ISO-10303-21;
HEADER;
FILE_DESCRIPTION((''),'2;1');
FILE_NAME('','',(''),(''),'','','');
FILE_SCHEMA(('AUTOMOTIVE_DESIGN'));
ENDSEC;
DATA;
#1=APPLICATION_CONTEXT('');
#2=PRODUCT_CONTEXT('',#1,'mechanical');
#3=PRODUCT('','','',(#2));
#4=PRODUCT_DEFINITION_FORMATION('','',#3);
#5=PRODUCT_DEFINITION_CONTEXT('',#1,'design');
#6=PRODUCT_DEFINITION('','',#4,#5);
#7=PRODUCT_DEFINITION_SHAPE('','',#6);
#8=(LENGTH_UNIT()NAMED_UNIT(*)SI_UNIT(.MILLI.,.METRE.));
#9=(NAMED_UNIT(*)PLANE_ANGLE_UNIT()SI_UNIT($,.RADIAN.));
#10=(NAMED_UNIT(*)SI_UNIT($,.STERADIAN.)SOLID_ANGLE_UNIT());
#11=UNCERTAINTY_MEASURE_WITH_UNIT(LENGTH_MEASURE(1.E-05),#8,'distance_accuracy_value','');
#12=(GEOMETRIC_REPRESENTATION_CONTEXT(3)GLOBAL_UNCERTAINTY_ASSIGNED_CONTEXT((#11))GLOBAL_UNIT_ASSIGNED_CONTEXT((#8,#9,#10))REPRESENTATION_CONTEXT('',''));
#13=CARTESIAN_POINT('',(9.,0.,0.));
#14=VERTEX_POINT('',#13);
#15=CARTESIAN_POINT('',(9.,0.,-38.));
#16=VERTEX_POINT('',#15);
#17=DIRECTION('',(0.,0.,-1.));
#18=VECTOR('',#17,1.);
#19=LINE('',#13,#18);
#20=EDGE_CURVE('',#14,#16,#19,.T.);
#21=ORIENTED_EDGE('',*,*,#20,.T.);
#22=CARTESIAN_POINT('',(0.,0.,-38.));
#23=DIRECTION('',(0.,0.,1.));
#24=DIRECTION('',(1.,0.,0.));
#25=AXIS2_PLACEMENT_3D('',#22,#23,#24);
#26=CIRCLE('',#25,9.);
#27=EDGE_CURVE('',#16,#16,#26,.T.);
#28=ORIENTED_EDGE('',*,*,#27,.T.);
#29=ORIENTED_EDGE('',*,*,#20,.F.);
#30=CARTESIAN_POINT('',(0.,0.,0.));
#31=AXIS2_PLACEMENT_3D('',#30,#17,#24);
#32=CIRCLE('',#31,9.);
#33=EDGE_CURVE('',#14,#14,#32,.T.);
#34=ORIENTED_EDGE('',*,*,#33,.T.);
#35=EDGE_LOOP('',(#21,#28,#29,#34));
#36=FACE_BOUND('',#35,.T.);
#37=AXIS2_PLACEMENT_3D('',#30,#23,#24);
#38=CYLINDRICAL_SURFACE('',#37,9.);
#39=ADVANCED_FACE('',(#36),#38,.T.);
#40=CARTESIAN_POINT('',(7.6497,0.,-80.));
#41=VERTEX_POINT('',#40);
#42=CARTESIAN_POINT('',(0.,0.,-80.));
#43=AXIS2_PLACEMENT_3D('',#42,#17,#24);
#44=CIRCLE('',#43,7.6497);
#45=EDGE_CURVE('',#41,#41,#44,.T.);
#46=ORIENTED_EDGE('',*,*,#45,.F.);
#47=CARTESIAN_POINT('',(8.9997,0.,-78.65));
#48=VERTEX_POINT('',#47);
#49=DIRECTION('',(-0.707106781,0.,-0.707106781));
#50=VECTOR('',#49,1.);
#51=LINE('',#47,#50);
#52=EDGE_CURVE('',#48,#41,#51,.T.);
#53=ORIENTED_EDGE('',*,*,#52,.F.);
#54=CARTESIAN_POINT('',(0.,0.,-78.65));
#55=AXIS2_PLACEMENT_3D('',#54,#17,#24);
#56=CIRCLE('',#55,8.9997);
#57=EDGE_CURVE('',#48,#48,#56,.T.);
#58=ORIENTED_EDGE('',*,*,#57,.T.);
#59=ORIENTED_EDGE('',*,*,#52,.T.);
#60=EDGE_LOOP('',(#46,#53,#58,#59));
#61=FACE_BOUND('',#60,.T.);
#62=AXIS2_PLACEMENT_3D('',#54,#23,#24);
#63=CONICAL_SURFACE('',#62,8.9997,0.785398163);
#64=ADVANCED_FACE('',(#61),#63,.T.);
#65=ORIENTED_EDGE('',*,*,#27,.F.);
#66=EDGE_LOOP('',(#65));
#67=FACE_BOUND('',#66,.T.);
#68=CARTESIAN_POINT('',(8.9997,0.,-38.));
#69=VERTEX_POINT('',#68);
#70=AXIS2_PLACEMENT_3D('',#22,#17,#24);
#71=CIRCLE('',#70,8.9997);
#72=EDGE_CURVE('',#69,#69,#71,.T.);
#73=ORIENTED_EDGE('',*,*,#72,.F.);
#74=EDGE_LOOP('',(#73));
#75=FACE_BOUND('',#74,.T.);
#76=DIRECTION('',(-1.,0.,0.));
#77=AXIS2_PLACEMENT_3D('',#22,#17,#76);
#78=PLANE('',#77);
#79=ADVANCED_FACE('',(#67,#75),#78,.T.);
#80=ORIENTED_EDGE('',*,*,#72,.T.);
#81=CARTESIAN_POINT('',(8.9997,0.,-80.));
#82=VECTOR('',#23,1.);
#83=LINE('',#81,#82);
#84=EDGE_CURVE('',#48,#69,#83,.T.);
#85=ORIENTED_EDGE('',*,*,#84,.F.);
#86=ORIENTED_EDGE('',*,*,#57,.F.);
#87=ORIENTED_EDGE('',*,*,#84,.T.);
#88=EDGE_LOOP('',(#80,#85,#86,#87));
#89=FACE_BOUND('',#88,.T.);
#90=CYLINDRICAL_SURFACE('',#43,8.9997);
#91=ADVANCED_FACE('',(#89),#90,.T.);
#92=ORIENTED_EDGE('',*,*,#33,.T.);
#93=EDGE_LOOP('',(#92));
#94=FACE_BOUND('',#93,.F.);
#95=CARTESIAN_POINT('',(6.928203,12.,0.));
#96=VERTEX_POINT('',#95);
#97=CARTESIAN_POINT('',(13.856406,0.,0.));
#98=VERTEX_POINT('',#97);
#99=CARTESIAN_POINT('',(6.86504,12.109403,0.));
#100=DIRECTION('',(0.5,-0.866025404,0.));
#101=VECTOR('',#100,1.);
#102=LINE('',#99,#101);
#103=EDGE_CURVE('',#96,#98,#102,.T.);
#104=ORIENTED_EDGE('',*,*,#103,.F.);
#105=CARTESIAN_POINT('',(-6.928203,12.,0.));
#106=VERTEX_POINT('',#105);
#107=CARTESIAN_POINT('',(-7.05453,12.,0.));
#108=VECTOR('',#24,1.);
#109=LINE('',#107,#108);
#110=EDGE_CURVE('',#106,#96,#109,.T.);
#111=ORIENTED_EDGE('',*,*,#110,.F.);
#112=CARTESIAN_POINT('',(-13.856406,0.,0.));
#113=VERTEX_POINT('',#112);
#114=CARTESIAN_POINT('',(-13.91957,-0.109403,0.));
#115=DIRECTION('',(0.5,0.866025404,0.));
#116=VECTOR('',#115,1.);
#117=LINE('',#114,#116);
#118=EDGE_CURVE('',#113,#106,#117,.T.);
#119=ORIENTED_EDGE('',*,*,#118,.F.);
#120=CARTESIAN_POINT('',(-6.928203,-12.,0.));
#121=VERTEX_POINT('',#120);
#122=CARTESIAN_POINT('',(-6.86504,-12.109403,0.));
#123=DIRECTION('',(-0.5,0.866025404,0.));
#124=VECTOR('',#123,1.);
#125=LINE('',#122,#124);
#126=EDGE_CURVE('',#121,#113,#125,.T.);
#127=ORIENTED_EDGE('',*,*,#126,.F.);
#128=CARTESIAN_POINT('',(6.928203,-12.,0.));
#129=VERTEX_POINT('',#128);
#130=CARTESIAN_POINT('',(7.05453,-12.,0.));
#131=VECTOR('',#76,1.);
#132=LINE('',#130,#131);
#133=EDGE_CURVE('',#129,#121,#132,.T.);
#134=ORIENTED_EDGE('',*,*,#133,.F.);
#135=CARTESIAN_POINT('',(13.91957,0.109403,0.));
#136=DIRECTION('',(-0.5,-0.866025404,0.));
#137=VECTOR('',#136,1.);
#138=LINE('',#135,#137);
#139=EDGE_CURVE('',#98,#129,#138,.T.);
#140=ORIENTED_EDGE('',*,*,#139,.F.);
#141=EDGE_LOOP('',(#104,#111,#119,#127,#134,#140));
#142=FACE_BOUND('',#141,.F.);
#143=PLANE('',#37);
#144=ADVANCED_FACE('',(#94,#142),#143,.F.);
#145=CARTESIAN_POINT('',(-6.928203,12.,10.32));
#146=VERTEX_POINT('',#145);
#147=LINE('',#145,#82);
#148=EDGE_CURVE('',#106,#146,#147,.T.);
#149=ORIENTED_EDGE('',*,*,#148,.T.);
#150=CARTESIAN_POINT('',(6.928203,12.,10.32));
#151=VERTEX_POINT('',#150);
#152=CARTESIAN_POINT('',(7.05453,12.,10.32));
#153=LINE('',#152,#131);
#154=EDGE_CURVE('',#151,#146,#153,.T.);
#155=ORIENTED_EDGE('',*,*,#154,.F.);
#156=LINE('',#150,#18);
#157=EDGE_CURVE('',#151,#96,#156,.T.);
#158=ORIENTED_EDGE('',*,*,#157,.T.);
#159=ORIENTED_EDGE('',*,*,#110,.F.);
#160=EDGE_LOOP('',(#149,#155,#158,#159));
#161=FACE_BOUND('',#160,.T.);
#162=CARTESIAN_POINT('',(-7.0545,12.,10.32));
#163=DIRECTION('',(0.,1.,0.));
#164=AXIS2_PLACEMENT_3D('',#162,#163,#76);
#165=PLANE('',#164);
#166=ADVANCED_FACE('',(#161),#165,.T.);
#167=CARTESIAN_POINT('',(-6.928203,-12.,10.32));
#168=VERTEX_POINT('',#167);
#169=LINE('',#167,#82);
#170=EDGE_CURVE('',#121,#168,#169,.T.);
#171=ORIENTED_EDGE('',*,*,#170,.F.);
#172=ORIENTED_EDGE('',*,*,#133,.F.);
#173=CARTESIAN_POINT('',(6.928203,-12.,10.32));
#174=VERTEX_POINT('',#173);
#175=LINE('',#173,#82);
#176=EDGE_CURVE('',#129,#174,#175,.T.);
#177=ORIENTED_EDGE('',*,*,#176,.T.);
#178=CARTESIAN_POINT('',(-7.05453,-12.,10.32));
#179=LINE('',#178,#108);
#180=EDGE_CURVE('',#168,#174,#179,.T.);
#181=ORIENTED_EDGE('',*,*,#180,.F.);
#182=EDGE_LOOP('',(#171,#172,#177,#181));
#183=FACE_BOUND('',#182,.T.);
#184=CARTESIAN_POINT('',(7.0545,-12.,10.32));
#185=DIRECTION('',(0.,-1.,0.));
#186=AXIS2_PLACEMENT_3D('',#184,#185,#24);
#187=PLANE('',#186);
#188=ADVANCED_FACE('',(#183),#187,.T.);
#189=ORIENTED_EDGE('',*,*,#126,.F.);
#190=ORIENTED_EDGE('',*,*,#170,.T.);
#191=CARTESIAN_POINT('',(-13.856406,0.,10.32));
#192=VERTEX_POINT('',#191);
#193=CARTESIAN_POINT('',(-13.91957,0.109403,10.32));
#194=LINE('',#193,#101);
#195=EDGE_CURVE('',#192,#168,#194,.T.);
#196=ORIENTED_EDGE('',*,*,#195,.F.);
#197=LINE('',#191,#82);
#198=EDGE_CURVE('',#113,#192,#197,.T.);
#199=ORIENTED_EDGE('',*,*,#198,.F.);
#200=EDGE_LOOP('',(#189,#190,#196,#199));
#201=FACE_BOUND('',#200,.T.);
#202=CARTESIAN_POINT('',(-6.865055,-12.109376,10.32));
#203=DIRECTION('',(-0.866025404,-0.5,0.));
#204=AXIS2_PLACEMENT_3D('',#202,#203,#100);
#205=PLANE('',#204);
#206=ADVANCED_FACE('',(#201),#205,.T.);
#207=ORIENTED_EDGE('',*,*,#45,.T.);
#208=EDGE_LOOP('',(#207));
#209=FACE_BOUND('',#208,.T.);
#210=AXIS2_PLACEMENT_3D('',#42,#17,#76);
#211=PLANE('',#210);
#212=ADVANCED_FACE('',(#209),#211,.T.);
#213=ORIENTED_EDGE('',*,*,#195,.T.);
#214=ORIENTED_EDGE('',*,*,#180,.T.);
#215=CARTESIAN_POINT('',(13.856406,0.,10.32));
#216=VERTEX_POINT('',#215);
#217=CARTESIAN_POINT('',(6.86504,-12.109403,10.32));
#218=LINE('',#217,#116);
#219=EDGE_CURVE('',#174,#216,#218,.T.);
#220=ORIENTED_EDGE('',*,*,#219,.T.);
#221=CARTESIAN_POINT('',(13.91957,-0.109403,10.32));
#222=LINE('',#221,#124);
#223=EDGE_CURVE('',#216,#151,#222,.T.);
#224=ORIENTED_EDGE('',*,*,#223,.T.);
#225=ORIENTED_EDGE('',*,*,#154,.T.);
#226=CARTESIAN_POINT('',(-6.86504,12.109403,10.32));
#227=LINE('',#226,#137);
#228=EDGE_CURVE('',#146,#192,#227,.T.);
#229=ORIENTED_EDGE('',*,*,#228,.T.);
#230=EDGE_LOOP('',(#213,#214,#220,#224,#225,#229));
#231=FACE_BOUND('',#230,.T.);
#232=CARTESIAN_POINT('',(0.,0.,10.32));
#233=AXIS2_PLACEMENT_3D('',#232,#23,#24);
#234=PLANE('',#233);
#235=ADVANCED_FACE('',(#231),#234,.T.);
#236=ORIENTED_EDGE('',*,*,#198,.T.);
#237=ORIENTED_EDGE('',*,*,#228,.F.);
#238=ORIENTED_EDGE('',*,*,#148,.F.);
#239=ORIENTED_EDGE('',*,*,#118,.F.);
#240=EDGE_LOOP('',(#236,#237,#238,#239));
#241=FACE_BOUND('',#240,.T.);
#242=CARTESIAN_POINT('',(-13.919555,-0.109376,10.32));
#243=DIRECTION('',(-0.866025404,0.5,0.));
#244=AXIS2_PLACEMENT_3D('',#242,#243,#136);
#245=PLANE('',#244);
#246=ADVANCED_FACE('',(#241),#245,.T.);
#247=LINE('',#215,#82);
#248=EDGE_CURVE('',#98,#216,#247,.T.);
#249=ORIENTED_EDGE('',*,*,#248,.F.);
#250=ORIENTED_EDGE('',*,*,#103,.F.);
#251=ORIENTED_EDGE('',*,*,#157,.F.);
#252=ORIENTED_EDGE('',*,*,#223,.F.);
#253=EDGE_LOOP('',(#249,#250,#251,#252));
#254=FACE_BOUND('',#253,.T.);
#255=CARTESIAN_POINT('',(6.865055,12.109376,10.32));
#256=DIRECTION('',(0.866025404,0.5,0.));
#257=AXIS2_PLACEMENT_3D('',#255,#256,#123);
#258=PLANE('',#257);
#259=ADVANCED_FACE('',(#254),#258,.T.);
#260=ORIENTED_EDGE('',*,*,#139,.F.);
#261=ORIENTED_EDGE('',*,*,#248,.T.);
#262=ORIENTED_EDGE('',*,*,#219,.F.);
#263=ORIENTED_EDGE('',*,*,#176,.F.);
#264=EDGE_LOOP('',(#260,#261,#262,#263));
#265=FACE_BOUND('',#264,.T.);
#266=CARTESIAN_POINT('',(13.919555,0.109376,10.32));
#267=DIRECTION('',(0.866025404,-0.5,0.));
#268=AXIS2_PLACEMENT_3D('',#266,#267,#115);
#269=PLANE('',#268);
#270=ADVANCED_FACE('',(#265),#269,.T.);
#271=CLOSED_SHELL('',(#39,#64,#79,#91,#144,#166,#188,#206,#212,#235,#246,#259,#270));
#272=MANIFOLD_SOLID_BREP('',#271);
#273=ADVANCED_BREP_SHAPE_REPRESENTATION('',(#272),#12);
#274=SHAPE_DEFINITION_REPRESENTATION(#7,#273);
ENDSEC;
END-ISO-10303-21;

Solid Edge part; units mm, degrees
sketch "Sketch1" plane through (0, 0, 0) normal (0, 0, 1) x (1, 0, 0)
  circle A0 centre (0, 0) radius 13.92
  dimension "D1" = 27.84
extrude "Protrusion1" add sketch "Sketch1" along normal blind 10.32
sketch "Sketch2" plane through (0, 0, 0) normal (0, 0, -1) x (1, 0, 0)
  circle A0 centre (0, 0) radius 9
extrude "Protrusion2" add sketch "Sketch2" along normal blind 80
sketch "Sketch3" plane through (0, 0, -80) normal (0, 0, -1) x (1, 0, 0)
  circle A0 centre (0, 0) radius 8.9997
extrude "Cutout1" cut sketch "Sketch3" against normal blind 42 flip side to cut
chamfer "Chamfer_1" distance 1.35 angle 45 1 edges at (-8.9997, 0, -80)
sketch "Sketch4" plane through (0, 0, 10.32) normal (0, 0, 1) x (1, 0, 0)
  line L0 (-7.0545, 12) -> (7.0545, 12)
  dimension "D1" = 24
extrude "Cutout2" cut sketch "Sketch4" against normal up to next material side at (0, 12.05, 10.32)
pattern_circular "Pattern1" count 6 over 360 about axis through (0, 0, 10.32) along (0, 0, 1) of "Cutout2"
properties part number "109110"
